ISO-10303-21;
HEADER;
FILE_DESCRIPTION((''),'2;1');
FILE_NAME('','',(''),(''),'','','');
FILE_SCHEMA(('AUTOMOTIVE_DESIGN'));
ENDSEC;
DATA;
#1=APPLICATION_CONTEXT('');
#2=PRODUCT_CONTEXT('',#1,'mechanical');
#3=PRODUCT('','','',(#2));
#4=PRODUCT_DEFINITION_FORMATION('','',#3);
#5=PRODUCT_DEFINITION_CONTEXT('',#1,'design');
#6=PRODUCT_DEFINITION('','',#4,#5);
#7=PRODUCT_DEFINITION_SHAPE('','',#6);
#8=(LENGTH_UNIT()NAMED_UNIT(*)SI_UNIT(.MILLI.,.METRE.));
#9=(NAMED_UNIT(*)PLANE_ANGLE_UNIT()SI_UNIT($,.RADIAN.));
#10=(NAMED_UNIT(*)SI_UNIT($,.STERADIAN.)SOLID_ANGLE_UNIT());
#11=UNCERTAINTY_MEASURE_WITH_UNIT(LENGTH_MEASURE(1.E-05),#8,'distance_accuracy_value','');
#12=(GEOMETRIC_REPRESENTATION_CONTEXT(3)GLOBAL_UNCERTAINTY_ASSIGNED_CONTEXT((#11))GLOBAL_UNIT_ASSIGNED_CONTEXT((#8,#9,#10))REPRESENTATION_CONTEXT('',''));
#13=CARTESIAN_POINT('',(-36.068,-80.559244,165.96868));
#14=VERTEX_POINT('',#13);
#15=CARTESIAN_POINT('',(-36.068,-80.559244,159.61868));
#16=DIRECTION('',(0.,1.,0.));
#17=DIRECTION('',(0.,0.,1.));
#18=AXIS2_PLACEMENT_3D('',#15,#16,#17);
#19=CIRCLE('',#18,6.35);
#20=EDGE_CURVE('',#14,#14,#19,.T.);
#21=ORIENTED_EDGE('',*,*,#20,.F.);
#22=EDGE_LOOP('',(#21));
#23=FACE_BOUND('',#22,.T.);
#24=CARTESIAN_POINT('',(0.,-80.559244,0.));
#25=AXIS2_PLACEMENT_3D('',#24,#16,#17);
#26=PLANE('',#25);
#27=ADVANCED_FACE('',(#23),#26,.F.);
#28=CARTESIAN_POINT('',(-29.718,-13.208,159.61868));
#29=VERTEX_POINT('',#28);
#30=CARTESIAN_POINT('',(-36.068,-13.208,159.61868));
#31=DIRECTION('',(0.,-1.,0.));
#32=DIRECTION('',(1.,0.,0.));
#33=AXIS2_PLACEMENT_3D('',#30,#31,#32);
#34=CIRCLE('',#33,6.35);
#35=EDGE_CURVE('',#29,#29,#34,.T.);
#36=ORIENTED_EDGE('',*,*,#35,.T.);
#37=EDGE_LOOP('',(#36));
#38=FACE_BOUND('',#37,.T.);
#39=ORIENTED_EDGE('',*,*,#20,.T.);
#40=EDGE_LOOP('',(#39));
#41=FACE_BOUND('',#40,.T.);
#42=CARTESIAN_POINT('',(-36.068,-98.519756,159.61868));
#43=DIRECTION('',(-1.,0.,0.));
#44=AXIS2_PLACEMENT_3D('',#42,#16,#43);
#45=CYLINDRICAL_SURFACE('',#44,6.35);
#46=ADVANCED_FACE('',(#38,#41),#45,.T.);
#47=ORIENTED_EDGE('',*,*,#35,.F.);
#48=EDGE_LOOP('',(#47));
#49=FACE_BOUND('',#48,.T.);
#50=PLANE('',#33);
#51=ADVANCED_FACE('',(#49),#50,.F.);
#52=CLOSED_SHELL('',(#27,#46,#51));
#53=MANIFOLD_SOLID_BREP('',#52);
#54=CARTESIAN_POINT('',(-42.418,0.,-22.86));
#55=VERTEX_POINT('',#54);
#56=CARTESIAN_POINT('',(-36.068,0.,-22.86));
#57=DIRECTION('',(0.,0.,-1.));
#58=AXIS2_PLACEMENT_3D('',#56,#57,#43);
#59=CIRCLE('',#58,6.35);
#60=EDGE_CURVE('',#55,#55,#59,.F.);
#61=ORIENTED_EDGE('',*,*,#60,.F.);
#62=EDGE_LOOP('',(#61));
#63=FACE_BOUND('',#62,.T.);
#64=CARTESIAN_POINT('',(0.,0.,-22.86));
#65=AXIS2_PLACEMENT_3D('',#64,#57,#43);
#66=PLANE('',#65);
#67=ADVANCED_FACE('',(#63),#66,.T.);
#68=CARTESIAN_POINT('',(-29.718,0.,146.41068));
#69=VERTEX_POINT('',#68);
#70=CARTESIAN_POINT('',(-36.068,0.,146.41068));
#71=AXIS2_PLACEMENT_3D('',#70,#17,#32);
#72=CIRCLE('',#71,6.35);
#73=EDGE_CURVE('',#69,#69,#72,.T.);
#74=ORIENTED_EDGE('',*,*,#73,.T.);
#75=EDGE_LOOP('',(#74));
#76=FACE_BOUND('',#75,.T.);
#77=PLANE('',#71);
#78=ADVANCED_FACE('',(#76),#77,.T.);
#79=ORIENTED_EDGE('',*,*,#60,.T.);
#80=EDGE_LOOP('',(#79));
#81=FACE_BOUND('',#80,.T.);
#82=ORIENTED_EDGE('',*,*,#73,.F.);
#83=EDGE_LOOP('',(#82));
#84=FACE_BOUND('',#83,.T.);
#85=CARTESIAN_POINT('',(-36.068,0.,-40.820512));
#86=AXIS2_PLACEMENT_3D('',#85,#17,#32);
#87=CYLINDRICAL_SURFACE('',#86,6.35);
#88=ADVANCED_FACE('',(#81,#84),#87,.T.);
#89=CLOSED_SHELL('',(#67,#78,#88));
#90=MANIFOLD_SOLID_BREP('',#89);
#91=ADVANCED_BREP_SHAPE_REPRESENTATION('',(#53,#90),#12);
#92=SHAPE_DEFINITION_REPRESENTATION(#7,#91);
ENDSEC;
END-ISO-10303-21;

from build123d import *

# Parameters (mm, degrees)
BOSS_EXTRUDE1_START     = -169.27068
BOSS_EXTRUDE1_OUTLINE_R = 6.35
BOSS_EXTRUDE1_DEPTH     = 169.27068
SKETCH3_R               = 6.35
BOSS_EXTRUDE2_DEPTH     = 67.351244111


# Read off the part's stored shape, not the designer's step: Boss-Extrude1
with BuildPart() as part:
    # Boss-Extrude1 outline → Boss-Extrude1 (new body)
    with BuildSketch(Plane.XY.offset(146.41068).offset(BOSS_EXTRUDE1_START)):
        with Locations((-36.068, 0)):
            Circle(BOSS_EXTRUDE1_OUTLINE_R)
    extrude(amount=BOSS_EXTRUDE1_DEPTH)


with BuildPart() as body_2:
    # Sketch3 → Boss-Extrude2 (new body)
    with BuildSketch(Plane(origin=(0, -13.208, 0), x_dir=(-1, 0, 0), z_dir=(0, -1, 0))):
        with Locations(Location((36.068, -159.61868, 0), (0, 0, 270))):
            Circle(SKETCH3_R)
    extrude(amount=BOSS_EXTRUDE2_DEPTH)


solid = Compound([part.part, body_2.part])
